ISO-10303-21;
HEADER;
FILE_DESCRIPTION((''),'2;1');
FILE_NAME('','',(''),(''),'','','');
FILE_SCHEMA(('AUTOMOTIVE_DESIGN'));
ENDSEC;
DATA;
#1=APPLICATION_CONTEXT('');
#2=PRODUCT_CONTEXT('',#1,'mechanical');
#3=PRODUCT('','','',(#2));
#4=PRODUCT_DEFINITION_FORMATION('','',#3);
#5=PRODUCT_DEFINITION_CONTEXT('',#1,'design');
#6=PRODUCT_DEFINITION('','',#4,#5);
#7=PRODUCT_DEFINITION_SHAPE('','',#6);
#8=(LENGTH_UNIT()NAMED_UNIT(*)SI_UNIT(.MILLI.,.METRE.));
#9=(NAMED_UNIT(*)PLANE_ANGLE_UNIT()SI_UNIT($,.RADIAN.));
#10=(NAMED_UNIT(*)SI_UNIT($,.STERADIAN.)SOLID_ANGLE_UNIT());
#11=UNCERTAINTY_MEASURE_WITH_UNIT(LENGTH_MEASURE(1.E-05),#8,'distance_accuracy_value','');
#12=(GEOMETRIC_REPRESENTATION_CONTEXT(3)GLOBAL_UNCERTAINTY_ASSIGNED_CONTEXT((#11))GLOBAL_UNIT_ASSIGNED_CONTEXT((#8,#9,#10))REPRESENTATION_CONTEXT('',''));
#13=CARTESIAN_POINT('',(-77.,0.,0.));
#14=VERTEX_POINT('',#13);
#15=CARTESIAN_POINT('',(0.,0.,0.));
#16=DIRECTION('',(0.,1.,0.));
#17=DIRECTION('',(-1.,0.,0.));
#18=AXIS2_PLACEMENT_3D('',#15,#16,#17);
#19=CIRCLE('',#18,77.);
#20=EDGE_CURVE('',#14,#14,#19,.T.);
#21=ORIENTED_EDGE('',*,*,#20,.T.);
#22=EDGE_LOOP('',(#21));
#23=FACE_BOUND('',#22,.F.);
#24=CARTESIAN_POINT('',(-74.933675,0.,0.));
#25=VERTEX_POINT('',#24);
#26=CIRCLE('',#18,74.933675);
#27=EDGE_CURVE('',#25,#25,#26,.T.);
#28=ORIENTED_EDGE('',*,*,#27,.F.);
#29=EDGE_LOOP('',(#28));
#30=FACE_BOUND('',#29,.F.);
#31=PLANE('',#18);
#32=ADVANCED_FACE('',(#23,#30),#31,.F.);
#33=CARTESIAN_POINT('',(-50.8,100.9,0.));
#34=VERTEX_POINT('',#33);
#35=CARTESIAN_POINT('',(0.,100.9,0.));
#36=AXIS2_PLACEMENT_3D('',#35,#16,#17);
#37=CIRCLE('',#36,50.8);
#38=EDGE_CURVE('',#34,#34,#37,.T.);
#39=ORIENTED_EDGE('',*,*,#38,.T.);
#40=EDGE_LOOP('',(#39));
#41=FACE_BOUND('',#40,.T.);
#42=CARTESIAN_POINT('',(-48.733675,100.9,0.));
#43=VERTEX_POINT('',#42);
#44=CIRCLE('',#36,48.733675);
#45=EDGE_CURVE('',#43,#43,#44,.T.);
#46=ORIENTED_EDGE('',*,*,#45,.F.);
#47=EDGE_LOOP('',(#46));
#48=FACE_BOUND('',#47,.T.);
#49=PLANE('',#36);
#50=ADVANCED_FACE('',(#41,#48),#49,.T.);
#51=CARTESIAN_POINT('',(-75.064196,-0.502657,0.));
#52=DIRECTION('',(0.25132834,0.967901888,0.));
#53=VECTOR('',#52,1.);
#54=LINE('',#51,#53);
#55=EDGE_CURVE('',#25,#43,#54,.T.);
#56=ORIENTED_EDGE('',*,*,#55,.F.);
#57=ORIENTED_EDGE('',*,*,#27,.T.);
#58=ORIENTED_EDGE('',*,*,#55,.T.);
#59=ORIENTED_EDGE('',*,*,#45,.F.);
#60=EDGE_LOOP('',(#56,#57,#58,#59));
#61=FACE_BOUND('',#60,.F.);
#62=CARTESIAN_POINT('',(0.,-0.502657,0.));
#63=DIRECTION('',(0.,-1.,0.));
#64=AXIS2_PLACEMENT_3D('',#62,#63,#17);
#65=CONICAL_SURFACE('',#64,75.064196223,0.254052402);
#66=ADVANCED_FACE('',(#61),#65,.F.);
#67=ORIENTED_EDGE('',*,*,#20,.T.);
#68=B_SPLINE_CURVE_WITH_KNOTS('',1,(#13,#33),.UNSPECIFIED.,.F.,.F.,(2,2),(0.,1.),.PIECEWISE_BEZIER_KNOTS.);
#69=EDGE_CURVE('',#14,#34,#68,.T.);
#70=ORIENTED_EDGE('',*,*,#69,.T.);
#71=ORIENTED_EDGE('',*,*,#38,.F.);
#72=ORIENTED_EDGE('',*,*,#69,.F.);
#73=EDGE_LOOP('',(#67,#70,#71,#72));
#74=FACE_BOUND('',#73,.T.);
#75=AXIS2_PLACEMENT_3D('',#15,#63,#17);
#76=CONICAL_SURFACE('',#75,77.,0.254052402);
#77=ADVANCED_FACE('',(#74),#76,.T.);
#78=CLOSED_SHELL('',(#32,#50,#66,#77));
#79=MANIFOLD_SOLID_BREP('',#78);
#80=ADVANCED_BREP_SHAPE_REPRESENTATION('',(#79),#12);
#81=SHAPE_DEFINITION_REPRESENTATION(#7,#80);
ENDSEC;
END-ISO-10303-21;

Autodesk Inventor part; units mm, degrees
ref_plane "YZ Plane" through (0, 0, 0) normal (1, 0, 0) x (0, 1, 0)
ref_plane "XY Plane" through (0, 0, 0) normal (0, 0, 1) x (1, 0, 0)
sketch "Szkic6" plane through (0, 0, 0) normal (0, 1, 0) x (-1, 0, 0)
  circle A0 centre (0, 0) radius 77
  dimension "d33" = 154
ref_plane "Płaszczyzna konstrukcyjna1" through (0, 100.9, 0) normal (0, 1, 0) x (-1, 0, 0)
sketch "Szkic7" plane through (0, 100.9, 0) normal (0, 1, 0) x (-1, 0, 0)
  circle A0 centre (0, 0) radius 50.8
  dimension "d35" = 101.6
loft "Wyciągnięcie złożone1" add profiles "Szkic6", "Szkic7"
shell "Skorupa1" thickness 2 removed faces 2 at (7.3018, 100.9, 11.5135) at (-23.2587, 0, 21.3864)
equation "\"d33\" = OD1"
equation "\"d35\" = OD2"
equation "\"d52\" = THK"
equation "\"SzerokośćGięciaPodcięcia\" = Grubość"
equation "\"RozmiarPodcięciaNarożnika\" = 4 * Grubość"
equation "\"PromieńPrzejścia\" = PromieńGięcia"
equation "\"Rozmiar_promienia_Jacobiego\" = PromieńGięcia"
equation "\"Wielk_odstępu\" = Grubość"
equation "\"d2\" = PromieńGięcia"
equation "\"d23\" = PromieńGięcia"
equation "\"OD1\" = 154"
equation "\"OD2\" = 101.6"
equation "\"L\" = 100.9"
equation "\"THK\" = 2"
equation "\"d34\" = L"
equation "\"Grubość\" = 1.5"
equation "\"PromieńGięcia\" = 3"
properties part number "Redukcja symetryczna Ø154x101,6x2 L=100,9" material "304"
